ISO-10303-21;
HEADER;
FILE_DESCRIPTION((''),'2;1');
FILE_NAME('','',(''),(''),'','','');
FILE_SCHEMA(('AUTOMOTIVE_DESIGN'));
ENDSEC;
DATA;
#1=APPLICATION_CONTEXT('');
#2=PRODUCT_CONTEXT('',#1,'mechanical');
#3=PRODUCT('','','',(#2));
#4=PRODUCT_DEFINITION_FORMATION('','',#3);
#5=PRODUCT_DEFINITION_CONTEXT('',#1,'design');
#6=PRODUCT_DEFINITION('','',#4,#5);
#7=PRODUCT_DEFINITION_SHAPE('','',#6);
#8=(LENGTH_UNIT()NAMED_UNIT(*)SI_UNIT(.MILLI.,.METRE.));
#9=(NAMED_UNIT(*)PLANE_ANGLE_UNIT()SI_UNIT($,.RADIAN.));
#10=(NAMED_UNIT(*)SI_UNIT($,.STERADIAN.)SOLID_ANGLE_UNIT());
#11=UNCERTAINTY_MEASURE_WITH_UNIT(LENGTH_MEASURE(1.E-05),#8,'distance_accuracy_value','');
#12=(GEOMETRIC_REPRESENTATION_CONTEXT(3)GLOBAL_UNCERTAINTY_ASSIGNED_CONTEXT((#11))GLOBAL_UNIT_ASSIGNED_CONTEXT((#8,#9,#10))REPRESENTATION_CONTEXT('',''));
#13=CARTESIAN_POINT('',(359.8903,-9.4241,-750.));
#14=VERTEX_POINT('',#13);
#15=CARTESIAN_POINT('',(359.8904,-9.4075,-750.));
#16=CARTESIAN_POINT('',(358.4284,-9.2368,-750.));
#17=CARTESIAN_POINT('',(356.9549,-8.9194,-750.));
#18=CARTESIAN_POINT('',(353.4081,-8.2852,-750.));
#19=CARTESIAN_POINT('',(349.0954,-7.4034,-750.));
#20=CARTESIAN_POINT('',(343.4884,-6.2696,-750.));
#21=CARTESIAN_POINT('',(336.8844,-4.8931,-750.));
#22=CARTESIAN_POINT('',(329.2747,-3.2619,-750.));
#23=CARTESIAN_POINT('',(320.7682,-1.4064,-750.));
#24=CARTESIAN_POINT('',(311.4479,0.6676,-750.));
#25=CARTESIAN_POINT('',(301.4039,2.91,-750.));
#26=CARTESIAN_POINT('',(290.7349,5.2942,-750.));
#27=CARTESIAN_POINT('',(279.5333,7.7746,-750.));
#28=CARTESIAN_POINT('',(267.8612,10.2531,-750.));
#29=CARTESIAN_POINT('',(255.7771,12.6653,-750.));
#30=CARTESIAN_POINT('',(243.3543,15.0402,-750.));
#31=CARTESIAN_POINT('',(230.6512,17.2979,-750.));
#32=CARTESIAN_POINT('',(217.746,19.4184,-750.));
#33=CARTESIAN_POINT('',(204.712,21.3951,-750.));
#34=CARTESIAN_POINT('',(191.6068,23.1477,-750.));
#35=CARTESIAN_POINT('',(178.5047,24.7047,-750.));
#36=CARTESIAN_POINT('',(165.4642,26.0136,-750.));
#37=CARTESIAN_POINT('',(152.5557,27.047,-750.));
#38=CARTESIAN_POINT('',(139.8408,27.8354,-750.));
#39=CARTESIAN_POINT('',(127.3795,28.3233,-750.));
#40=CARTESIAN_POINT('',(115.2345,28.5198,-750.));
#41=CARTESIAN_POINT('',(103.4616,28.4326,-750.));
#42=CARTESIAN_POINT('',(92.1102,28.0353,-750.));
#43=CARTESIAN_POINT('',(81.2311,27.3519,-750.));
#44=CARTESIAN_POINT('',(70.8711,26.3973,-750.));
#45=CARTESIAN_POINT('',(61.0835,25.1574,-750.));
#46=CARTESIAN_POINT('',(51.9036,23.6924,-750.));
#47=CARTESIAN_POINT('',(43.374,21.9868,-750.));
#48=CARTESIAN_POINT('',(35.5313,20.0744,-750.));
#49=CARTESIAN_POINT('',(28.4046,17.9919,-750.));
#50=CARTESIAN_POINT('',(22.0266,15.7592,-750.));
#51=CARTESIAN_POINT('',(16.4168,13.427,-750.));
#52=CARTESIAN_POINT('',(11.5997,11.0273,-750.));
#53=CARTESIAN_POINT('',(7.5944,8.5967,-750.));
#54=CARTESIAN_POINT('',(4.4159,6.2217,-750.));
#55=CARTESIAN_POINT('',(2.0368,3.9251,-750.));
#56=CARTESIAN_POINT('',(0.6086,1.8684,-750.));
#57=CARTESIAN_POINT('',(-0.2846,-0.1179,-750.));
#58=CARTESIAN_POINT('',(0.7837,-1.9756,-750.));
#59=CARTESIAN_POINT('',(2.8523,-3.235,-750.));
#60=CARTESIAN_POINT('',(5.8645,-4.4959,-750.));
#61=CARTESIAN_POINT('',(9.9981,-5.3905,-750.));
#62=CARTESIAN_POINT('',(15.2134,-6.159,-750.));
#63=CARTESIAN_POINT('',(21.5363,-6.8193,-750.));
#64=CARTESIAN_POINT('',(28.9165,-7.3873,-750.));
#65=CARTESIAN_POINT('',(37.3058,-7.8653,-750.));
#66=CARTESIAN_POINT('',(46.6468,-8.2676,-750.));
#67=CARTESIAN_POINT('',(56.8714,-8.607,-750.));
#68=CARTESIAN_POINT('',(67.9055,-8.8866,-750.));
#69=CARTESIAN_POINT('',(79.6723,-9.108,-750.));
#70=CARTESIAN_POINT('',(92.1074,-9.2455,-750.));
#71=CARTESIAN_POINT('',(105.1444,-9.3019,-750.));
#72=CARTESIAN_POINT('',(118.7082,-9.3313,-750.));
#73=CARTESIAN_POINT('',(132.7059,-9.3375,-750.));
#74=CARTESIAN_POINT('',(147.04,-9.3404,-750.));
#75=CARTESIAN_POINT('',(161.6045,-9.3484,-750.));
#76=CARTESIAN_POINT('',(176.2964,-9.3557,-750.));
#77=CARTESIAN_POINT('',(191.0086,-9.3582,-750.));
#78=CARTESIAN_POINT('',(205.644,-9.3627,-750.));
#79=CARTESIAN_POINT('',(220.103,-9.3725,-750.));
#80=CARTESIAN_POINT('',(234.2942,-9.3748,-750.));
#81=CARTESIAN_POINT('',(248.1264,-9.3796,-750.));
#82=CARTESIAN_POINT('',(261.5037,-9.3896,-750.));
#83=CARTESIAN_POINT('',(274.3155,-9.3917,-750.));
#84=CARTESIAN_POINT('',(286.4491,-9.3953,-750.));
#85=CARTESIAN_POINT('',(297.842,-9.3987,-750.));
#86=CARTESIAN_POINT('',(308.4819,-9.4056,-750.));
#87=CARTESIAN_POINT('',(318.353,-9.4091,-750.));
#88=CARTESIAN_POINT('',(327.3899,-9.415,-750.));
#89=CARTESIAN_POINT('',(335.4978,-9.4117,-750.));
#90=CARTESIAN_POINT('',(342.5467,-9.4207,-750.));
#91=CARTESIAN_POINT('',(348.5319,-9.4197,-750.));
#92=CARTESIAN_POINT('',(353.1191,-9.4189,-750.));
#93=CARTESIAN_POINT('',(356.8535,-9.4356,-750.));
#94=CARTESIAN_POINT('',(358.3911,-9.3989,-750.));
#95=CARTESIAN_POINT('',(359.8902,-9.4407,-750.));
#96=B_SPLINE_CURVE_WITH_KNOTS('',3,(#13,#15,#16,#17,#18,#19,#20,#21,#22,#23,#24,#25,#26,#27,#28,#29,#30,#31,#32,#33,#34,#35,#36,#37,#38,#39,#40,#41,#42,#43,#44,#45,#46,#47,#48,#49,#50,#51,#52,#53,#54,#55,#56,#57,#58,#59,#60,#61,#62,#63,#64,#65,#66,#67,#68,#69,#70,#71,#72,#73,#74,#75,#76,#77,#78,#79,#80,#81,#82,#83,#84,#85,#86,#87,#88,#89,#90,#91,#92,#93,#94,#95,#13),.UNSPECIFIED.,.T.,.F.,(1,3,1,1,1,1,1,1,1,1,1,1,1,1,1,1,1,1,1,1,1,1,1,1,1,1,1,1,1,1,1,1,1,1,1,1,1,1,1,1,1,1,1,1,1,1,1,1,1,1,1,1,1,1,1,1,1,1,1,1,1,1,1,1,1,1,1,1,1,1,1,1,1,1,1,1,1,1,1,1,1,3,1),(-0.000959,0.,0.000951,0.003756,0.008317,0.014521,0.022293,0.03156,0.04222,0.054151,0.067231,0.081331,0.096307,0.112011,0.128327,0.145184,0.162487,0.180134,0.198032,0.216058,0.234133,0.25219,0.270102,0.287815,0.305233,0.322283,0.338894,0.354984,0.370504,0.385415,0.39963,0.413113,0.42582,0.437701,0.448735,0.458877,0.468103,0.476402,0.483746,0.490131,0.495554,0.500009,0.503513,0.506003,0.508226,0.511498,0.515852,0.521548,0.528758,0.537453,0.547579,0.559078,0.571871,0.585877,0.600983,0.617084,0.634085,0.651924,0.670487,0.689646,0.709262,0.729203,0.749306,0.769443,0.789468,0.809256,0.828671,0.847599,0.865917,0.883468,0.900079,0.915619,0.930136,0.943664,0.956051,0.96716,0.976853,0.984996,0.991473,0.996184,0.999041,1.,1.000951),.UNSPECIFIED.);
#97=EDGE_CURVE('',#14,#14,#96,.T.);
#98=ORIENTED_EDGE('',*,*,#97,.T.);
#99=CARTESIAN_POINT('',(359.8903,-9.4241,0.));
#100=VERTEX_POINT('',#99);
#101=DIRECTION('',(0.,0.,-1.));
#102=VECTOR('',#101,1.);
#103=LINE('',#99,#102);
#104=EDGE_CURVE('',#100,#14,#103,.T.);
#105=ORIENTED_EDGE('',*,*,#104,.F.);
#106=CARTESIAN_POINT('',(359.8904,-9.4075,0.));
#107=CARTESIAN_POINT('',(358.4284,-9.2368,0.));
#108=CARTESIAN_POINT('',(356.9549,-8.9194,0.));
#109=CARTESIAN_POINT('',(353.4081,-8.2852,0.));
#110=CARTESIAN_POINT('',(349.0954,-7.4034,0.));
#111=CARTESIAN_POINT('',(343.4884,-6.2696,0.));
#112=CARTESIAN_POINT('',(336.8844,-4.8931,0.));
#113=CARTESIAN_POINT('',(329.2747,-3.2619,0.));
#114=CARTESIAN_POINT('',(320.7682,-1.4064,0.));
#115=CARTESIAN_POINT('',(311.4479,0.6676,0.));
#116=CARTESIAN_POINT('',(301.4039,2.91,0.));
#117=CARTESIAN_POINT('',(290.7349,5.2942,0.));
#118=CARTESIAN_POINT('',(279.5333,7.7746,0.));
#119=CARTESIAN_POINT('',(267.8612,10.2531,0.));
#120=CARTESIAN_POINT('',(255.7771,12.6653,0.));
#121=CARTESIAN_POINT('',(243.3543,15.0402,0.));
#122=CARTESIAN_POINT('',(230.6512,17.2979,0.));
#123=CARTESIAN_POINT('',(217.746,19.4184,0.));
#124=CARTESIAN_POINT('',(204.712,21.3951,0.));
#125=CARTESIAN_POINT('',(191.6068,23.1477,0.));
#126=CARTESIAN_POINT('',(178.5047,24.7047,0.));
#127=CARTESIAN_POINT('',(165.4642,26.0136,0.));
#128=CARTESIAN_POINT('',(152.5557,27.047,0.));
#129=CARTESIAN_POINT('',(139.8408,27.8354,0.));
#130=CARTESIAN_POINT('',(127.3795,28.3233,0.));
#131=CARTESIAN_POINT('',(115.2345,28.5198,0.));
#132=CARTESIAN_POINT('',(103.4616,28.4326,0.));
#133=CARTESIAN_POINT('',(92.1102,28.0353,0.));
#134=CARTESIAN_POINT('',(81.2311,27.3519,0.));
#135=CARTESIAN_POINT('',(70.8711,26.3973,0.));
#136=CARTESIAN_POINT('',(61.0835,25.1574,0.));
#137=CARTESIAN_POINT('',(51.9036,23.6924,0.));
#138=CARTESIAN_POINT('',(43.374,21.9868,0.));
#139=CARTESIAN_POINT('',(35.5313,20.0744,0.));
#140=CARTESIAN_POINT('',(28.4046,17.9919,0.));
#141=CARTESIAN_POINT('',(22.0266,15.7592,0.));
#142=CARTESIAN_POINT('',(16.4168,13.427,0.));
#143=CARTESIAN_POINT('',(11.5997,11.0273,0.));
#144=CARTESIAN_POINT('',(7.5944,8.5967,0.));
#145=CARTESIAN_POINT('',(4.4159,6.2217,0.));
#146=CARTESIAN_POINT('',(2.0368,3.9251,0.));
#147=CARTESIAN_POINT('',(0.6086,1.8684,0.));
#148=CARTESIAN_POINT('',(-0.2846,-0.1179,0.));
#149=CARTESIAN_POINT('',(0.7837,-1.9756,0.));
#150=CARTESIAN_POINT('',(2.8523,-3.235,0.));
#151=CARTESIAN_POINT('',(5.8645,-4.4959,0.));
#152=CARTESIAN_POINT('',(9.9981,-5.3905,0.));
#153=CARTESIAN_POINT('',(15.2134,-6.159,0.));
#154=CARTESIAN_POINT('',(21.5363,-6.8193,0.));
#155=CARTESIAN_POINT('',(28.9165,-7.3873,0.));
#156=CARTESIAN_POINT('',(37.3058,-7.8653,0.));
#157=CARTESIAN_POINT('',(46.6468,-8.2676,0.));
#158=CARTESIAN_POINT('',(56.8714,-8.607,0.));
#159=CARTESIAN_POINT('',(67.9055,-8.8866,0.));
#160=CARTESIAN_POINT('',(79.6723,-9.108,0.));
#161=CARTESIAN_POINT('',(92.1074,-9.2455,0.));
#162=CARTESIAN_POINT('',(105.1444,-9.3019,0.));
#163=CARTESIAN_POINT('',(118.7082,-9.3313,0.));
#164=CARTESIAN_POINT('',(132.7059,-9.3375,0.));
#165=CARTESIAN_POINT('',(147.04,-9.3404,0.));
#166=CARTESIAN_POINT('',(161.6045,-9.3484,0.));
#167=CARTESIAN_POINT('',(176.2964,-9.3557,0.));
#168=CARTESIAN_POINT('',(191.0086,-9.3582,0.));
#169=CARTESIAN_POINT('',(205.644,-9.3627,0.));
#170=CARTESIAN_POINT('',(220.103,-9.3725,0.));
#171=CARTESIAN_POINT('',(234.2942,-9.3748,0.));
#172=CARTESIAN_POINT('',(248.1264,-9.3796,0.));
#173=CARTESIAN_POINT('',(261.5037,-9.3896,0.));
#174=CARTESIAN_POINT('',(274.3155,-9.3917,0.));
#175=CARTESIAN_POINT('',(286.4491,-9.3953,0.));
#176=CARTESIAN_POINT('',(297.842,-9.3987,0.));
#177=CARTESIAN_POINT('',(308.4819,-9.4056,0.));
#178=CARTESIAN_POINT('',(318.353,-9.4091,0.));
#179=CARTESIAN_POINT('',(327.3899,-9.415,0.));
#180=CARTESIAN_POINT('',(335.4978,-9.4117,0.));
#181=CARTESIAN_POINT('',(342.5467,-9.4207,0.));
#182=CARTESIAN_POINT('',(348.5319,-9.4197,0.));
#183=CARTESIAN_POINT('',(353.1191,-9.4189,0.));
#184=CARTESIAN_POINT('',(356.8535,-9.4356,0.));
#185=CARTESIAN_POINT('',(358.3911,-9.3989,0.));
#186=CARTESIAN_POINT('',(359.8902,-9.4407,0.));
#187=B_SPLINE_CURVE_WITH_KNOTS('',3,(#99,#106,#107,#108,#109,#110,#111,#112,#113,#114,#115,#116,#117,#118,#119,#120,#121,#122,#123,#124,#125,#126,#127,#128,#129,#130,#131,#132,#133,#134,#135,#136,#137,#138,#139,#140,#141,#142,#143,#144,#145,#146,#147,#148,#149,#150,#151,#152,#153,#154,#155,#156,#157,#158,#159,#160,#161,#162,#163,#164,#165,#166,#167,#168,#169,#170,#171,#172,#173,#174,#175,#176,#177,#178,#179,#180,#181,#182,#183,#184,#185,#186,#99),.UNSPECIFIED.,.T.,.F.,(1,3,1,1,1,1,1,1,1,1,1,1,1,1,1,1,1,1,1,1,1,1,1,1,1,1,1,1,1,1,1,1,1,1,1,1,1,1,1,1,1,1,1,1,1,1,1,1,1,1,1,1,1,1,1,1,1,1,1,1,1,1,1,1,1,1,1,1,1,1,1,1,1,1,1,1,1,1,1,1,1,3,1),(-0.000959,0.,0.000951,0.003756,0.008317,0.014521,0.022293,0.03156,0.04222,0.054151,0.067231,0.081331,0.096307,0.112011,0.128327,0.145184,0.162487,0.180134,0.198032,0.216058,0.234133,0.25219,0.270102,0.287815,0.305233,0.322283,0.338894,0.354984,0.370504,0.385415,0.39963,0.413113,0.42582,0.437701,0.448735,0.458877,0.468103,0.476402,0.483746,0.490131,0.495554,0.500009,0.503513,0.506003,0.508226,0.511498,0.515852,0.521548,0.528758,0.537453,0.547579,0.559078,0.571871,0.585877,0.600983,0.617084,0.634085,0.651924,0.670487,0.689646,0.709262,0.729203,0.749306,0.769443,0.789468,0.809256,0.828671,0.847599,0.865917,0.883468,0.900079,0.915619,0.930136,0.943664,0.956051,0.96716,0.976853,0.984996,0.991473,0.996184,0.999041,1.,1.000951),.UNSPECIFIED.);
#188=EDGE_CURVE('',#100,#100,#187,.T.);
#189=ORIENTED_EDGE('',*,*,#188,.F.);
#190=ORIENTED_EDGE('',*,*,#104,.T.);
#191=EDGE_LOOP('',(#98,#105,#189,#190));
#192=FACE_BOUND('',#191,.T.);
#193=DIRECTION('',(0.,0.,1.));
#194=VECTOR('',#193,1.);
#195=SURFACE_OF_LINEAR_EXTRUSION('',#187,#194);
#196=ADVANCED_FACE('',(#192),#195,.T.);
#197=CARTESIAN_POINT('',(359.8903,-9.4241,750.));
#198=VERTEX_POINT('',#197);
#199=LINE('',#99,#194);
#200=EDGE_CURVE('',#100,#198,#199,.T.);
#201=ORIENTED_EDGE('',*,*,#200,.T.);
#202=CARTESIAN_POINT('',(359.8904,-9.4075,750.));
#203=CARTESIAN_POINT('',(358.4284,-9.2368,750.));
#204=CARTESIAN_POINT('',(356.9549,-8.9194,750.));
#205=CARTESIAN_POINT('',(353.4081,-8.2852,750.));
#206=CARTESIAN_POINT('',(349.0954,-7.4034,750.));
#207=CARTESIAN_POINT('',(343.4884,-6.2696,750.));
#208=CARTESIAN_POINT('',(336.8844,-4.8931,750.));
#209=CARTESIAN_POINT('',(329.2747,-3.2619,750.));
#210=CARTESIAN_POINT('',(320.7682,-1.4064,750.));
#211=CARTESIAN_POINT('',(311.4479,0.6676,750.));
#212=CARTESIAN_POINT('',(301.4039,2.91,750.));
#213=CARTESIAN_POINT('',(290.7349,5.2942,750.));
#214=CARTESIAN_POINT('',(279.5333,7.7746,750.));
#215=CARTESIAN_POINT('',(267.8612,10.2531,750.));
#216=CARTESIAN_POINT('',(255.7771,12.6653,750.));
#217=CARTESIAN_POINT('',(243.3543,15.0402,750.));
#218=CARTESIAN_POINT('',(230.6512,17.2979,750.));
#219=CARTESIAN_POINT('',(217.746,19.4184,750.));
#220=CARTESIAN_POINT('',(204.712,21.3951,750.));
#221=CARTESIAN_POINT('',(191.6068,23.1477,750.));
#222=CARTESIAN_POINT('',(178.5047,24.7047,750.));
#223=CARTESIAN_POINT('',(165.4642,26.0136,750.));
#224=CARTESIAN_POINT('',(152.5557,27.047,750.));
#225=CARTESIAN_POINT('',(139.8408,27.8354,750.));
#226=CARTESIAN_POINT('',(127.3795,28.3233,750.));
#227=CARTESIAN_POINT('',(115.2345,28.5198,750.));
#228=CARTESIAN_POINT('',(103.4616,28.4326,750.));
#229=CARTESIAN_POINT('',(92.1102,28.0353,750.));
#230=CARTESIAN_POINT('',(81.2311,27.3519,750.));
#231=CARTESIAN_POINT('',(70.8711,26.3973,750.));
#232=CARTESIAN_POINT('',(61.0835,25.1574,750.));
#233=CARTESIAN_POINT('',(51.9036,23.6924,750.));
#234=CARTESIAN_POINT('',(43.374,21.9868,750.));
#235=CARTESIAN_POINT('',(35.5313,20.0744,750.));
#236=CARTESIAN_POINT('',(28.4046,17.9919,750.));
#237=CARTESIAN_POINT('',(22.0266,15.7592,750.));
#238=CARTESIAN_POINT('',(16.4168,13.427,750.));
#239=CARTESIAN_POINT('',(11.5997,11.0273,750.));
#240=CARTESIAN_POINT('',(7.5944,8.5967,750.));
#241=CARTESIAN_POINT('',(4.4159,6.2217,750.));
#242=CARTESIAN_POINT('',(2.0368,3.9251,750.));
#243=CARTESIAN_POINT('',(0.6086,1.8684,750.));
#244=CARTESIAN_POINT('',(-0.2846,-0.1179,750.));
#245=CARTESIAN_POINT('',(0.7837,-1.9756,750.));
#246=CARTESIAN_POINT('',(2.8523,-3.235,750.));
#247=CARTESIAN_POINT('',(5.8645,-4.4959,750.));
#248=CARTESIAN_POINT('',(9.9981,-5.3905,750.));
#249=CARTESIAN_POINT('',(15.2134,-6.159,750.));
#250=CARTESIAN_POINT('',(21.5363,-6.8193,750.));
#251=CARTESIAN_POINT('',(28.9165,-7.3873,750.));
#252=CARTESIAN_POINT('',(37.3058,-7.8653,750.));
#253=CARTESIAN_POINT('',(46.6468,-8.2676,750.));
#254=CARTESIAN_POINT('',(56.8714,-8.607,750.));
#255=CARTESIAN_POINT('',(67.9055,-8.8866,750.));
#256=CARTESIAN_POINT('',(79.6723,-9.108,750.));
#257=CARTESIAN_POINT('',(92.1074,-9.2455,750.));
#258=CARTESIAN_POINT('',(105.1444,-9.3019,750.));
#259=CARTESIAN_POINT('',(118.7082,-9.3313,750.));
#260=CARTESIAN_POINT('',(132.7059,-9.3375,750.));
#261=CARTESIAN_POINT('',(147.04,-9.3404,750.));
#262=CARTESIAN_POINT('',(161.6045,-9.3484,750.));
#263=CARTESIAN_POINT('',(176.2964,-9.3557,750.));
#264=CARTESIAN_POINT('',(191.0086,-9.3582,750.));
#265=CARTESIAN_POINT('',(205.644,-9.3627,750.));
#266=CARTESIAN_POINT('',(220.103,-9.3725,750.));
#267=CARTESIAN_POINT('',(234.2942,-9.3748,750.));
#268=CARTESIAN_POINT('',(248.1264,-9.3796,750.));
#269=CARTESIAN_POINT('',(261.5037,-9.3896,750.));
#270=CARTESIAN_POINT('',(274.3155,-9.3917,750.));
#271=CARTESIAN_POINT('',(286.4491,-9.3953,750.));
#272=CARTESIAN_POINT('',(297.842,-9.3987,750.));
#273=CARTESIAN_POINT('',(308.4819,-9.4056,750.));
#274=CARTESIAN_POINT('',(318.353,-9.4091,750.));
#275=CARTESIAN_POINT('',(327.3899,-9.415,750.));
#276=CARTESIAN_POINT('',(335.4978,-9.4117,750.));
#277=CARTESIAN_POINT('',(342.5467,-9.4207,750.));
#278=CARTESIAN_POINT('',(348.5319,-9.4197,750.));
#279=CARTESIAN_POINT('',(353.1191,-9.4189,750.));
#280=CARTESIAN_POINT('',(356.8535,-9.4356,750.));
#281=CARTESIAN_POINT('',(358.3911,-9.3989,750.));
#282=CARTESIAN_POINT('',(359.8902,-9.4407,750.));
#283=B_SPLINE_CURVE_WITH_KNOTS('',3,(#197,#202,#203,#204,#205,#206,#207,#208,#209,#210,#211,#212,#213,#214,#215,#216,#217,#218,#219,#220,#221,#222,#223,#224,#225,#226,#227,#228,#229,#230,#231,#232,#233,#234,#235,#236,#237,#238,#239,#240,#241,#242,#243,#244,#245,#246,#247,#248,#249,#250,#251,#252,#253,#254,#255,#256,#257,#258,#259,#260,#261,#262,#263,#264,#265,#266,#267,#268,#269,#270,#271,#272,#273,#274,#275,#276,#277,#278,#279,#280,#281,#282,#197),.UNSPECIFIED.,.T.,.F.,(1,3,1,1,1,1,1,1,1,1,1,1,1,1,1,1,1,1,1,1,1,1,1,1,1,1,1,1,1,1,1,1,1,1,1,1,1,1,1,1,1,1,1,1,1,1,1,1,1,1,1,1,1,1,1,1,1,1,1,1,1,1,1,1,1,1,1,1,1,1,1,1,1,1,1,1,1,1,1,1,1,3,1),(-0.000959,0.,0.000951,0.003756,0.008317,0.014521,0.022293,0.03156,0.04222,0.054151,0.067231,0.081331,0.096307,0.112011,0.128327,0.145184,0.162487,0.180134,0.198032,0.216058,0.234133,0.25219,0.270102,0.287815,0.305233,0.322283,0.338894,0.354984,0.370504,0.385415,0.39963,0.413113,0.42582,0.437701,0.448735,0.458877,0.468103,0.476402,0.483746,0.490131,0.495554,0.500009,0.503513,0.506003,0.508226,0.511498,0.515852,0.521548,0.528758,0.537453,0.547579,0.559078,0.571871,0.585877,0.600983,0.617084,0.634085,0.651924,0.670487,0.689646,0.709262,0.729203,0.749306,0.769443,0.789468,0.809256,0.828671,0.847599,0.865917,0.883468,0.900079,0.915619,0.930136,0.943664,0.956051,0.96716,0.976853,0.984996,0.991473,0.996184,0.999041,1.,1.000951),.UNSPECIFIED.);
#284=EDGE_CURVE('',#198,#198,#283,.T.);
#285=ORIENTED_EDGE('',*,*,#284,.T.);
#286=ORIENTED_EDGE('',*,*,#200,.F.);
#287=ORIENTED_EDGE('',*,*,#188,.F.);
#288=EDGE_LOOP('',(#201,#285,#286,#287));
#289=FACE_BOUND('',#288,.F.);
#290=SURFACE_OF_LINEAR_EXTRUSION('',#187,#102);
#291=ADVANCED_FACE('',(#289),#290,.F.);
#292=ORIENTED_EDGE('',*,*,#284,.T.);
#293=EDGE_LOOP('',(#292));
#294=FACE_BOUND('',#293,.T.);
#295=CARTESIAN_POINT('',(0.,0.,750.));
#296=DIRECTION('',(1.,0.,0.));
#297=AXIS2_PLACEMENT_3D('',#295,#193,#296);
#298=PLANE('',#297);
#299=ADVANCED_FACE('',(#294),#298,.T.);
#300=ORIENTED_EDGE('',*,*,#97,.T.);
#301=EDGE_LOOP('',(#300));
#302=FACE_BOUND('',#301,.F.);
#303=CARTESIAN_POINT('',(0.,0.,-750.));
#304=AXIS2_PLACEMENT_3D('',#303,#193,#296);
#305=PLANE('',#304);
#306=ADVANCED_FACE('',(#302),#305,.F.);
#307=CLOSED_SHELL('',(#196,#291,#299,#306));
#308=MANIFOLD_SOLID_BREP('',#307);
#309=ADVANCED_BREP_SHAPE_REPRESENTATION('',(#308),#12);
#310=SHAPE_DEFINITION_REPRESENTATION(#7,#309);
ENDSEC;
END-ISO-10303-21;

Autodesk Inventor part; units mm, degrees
ref_plane "YZ Plane" through (0, 0, 0) normal (1, 0, 0) x (0, 1, 0)
ref_plane "XZ Plane" through (0, 0, 0) normal (0, 1, 0) x (-1, 0, 0)
sketch "Airfoil" plane through (0, 0, 0) normal (0, 0, 1) x (1, 0, 0)
  spline S0 degree 3 poles (360.0001, -3.1258) (359.9999, -3.1093) (358.5352, -2.9642) (357.0563, -2.6727) (353.499, -2.1006) (349.1715, -1.2943) (343.5455, -0.2589) (336.9185, 1.0019) (329.2813, 2.4997) (320.7437, 4.2061) (311.3885, 6.1167) (301.3069, 8.1831) (290.5978, 10.3802) (279.3545, 12.6643) (267.6408, 14.9381) (255.5164, 17.1385) (243.0539, 19.2958) (230.3132, 21.3308) (217.3729, 23.2252) (204.3064, 24.9736) (191.1725, 26.4966) (178.0452, 27.8241) (164.9837, 28.9046) (152.0591, 29.712) (139.3323, 30.2778) (126.8644, 30.5476) (114.7179, 30.5317) (102.9483, 30.2384) (91.6056, 29.6426) (80.7401, 28.7689) (70.3983, 27.6332) (60.634, 26.2223) (51.4811, 24.5969) (42.9826, 22.7423) (35.1746, 20.693) (28.0854, 18.4861) (21.7475, 16.1422) (16.1794, 13.7122) (11.405, 11.2286) (7.4429, 8.7282) (4.3064, 6.298) (1.9678, 3.9602) (0.5759, 1.8788) (-0.2825, -0.1229) (0.8182, -1.9616) (2.9085, -3.1846) (5.9423, -4.3926) (10.0909, -5.2147) (15.3188, -5.8919) (21.6524, -6.4415) (29.0414, -6.8802) (37.4377, -7.2114) (46.7843, -7.4502) (57.0133, -7.6106) (68.0506, -7.6971) (79.8194, -7.7126) (92.2551, -7.6326) (105.2911, -7.4608) (118.8533, -7.2529) (132.849, -7.0142) (147.1809, -6.7663) (161.7434, -6.5195) (176.4331, -6.2697) (191.1431, -6.0148) (205.7764, -5.7632) (220.2333, -5.52) (234.4223, -5.2741) (248.2526, -5.0368) (261.628, -4.8128) (274.4379, -4.5908) (286.5696, -4.3821) (297.9608, -4.1861) (308.5993, -4.0068) (318.4689, -3.8376) (327.5045, -3.6854) (335.6112, -3.5403) (342.6591, -3.4259) (348.6433, -3.3202) (353.2298, -3.2392) (356.964, -3.1905) (358.5007, -3.1269) (360.0002, -3.1425) (360.0001, -3.1258) knots 0 0 0 0 0.000951 0.003756 0.008317 0.014521 0.022293 0.03156 0.04222 0.054151 0.067231 0.081331 0.096307 0.112011 0.128327 0.145184 0.162487 0.180134 0.198032 0.216058 0.234133 0.25219 0.270102 0.287815 0.305233 0.322283 0.338894 0.354984 0.370504 0.385415 0.39963 0.413113 0.42582 0.437701 0.448735 0.458877 0.468103 0.476402 0.483746 0.490131 0.495554 0.500009 0.503513 0.506003 0.508226 0.511498 0.515852 0.521548 0.528758 0.537453 0.547579 0.559078 0.571871 0.585877 0.600983 0.617084 0.634085 0.651924 0.670487 0.689646 0.709262 0.729203 0.749306 0.769443 0.789468 0.809256 0.828671 0.847599 0.865917 0.883468 0.900079 0.915619 0.930136 0.943664 0.956051 0.96716 0.976853 0.984996 0.991473 0.996184 0.999041 1 1 1 1
  line L0 (360.0001, -3.1258) -> (359.9999, -3.1093) construction
  line L1 (359.9999, -3.1093) -> (358.5352, -2.9642) construction
  line L2 (358.5352, -2.9642) -> (357.0563, -2.6727) construction
  line L3 (357.0563, -2.6727) -> (353.499, -2.1006) construction
  line L4 (353.499, -2.1006) -> (349.1715, -1.2943) construction
  line L5 (349.1715, -1.2943) -> (343.5455, -0.2589) construction
  line L6 (343.5455, -0.2589) -> (336.9185, 1.0019) construction
  line L7 (336.9185, 1.0019) -> (329.2813, 2.4997) construction
  line L8 (329.2813, 2.4997) -> (320.7437, 4.2061) construction
  line L9 (320.7437, 4.2061) -> (311.3885, 6.1167) construction
  line L10 (311.3885, 6.1167) -> (301.3069, 8.1831) construction
  line L11 (301.3069, 8.1831) -> (290.5978, 10.3802) construction
  line L12 (290.5978, 10.3802) -> (279.3545, 12.6643) construction
  line L13 (279.3545, 12.6643) -> (267.6408, 14.9381) construction
  line L14 (267.6408, 14.9381) -> (255.5164, 17.1385) construction
  line L15 (255.5164, 17.1385) -> (243.0539, 19.2958) construction
  line L16 (243.0539, 19.2958) -> (230.3132, 21.3308) construction
  line L17 (230.3132, 21.3308) -> (217.3729, 23.2252) construction
  line L18 (217.3729, 23.2252) -> (204.3064, 24.9736) construction
  line L19 (204.3064, 24.9736) -> (191.1725, 26.4966) construction
  line L20 (191.1725, 26.4966) -> (178.0452, 27.8241) construction
  line L21 (178.0452, 27.8241) -> (164.9837, 28.9046) construction
  line L22 (164.9837, 28.9046) -> (152.0591, 29.712) construction
  line L23 (152.0591, 29.712) -> (139.3323, 30.2778) construction
  line L24 (139.3323, 30.2778) -> (126.8644, 30.5476) construction
  line L25 (126.8644, 30.5476) -> (114.7179, 30.5317) construction
  line L26 (114.7179, 30.5317) -> (102.9483, 30.2384) construction
  line L27 (102.9483, 30.2384) -> (91.6056, 29.6426) construction
  line L28 (91.6056, 29.6426) -> (80.7401, 28.7689) construction
  line L29 (80.7401, 28.7689) -> (70.3983, 27.6332) construction
  line L30 (70.3983, 27.6332) -> (60.634, 26.2223) construction
  line L31 (60.634, 26.2223) -> (51.4811, 24.5969) construction
  line L32 (51.4811, 24.5969) -> (42.9826, 22.7423) construction
  line L33 (42.9826, 22.7423) -> (35.1746, 20.693) construction
  line L34 (35.1746, 20.693) -> (28.0854, 18.4861) construction
  line L35 (28.0854, 18.4861) -> (21.7475, 16.1422) construction
  line L36 (21.7475, 16.1422) -> (16.1794, 13.7122) construction
  line L37 (16.1794, 13.7122) -> (11.405, 11.2286) construction
  line L38 (11.405, 11.2286) -> (7.4429, 8.7282) construction
  line L39 (7.4429, 8.7282) -> (4.3064, 6.298) construction
  line L40 (4.3064, 6.298) -> (1.9678, 3.9602) construction
  line L41 (1.9678, 3.9602) -> (0.5759, 1.8788) construction
  line L42 (0.5759, 1.8788) -> (-0.2825, -0.1229) construction
  line L43 (-0.2825, -0.1229) -> (0.8182, -1.9616) construction
  line L44 (0.8182, -1.9616) -> (2.9085, -3.1846) construction
  line L45 (2.9085, -3.1846) -> (5.9423, -4.3926) construction
  line L46 (5.9423, -4.3926) -> (10.0909, -5.2147) construction
  line L47 (10.0909, -5.2147) -> (15.3188, -5.8919) construction
  line L48 (15.3188, -5.8919) -> (21.6524, -6.4415) construction
  line L49 (21.6524, -6.4415) -> (29.0414, -6.8802) construction
  line L50 (29.0414, -6.8802) -> (37.4377, -7.2114) construction
  line L51 (37.4377, -7.2114) -> (46.7843, -7.4502) construction
  line L52 (46.7843, -7.4502) -> (57.0133, -7.6106) construction
  line L53 (57.0133, -7.6106) -> (68.0506, -7.6971) construction
  line L54 (68.0506, -7.6971) -> (79.8194, -7.7126) construction
  line L55 (79.8194, -7.7126) -> (92.2551, -7.6326) construction
  line L56 (92.2551, -7.6326) -> (105.2911, -7.4608) construction
  line L57 (105.2911, -7.4608) -> (118.8533, -7.2529) construction
  line L58 (118.8533, -7.2529) -> (132.849, -7.0142) construction
  line L59 (132.849, -7.0142) -> (147.1809, -6.7663) construction
  line L60 (147.1809, -6.7663) -> (161.7434, -6.5195) construction
  line L61 (161.7434, -6.5195) -> (176.4331, -6.2697) construction
  line L62 (176.4331, -6.2697) -> (191.1431, -6.0148) construction
  line L63 (191.1431, -6.0148) -> (205.7764, -5.7632) construction
  line L64 (205.7764, -5.7632) -> (220.2333, -5.52) construction
  line L65 (220.2333, -5.52) -> (234.4223, -5.2741) construction
  line L66 (234.4223, -5.2741) -> (248.2526, -5.0368) construction
  line L67 (248.2526, -5.0368) -> (261.628, -4.8128) construction
  line L68 (261.628, -4.8128) -> (274.4379, -4.5908) construction
  line L69 (274.4379, -4.5908) -> (286.5696, -4.3821) construction
  line L70 (286.5696, -4.3821) -> (297.9608, -4.1861) construction
  line L71 (297.9608, -4.1861) -> (308.5993, -4.0068) construction
  line L72 (308.5993, -4.0068) -> (318.4689, -3.8376) construction
  line L73 (318.4689, -3.8376) -> (327.5045, -3.6854) construction
  line L74 (327.5045, -3.6854) -> (335.6112, -3.5403) construction
  line L75 (335.6112, -3.5403) -> (342.6591, -3.4259) construction
  line L76 (342.6591, -3.4259) -> (348.6433, -3.3202) construction
  line L77 (348.6433, -3.3202) -> (353.2298, -3.2392) construction
  line L78 (353.2298, -3.2392) -> (356.964, -3.1905) construction
  line L79 (356.964, -3.1905) -> (358.5007, -3.1269) construction
  line L80 (358.5007, -3.1269) -> (360.0002, -3.1425) construction
  line L81 (360.0002, -3.1425) -> (360.0001, -3.1258) construction
  line L82 (0, 0) -> (360.0001, -3.1258) construction
  point P0 (179.3364, 5.2593)
sketch "Sketch1" plane through (0, 0, 0) normal (0, 0, 1) x (1, 0, 0)
  line L0 (0, 0) -> (0, -30) construction
  line L1 (0, -30) -> (300, -30) construction
  spline S0 degree 3 poles (359.8903, -9.4241) (359.8904, -9.4075) (358.4284, -9.2368) (356.9549, -8.9194) (353.4081, -8.2852) (349.0954, -7.4034) (343.4884, -6.2696) (336.8844, -4.8931) (329.2747, -3.2619) (320.7682, -1.4064) (311.4479, 0.6676) (301.4039, 2.91) (290.7349, 5.2942) (279.5333, 7.7746) (267.8612, 10.2531) (255.7771, 12.6653) (243.3543, 15.0402) (230.6512, 17.2979) (217.746, 19.4184) (204.712, 21.3951) (191.6068, 23.1477) (178.5047, 24.7047) (165.4642, 26.0136) (152.5557, 27.047) (139.8408, 27.8354) (127.3795, 28.3233) (115.2345, 28.5198) (103.4616, 28.4326) (92.1102, 28.0353) (81.2311, 27.3519) (70.8711, 26.3973) (61.0835, 25.1574) (51.9036, 23.6924) (43.374, 21.9868) (35.5313, 20.0744) (28.4046, 17.9919) (22.0266, 15.7592) (16.4168, 13.427) (11.5997, 11.0273) (7.5944, 8.5967) (4.4159, 6.2217) (2.0368, 3.9251) (0.6086, 1.8684) (-0.2846, -0.1179) (0.7837, -1.9756) (2.8523, -3.235) (5.8645, -4.4959) (9.9981, -5.3905) (15.2134, -6.159) (21.5363, -6.8193) (28.9165, -7.3873) (37.3058, -7.8653) (46.6468, -8.2676) (56.8714, -8.607) (67.9055, -8.8866) (79.6723, -9.108) (92.1074, -9.2455) (105.1444, -9.3019) (118.7082, -9.3313) (132.7059, -9.3375) (147.04, -9.3404) (161.6045, -9.3484) (176.2964, -9.3557) (191.0086, -9.3582) (205.644, -9.3627) (220.103, -9.3725) (234.2942, -9.3748) (248.1264, -9.3796) (261.5037, -9.3896) (274.3155, -9.3917) (286.4491, -9.3953) (297.842, -9.3987) (308.4819, -9.4056) (318.353, -9.4091) (327.3899, -9.415) (335.4978, -9.4117) (342.5467, -9.4207) (348.5319, -9.4197) (353.1191, -9.4189) (356.8535, -9.4356) (358.3911, -9.3989) (359.8902, -9.4407) (359.8903, -9.4241) knots 0 0 0 0 0.000951 0.003756 0.008317 0.014521 0.022293 0.03156 0.04222 0.054151 0.067231 0.081331 0.096307 0.112011 0.128327 0.145184 0.162487 0.180134 0.198032 0.216058 0.234133 0.25219 0.270102 0.287815 0.305233 0.322283 0.338894 0.354984 0.370504 0.385415 0.39963 0.413113 0.42582 0.437701 0.448735 0.458877 0.468103 0.476402 0.483746 0.490131 0.495554 0.500009 0.503513 0.506003 0.508226 0.511498 0.515852 0.521548 0.528758 0.537453 0.547579 0.559078 0.571871 0.585877 0.600983 0.617084 0.634085 0.651924 0.670487 0.689646 0.709262 0.729203 0.749306 0.769443 0.789468 0.809256 0.828671 0.847599 0.865917 0.883468 0.900079 0.915619 0.930136 0.943664 0.956051 0.96716 0.976853 0.984996 0.991473 0.996184 0.999041 1 1 1 1
  line L2 (359.8903, -9.4241) -> (359.8904, -9.4075) construction
  line L3 (359.8904, -9.4075) -> (358.4284, -9.2368) construction
  line L4 (358.4284, -9.2368) -> (356.9549, -8.9194) construction
  line L5 (356.9549, -8.9194) -> (353.4081, -8.2852) construction
  line L6 (353.4081, -8.2852) -> (349.0954, -7.4034) construction
  line L7 (349.0954, -7.4034) -> (343.4884, -6.2696) construction
  line L8 (343.4884, -6.2696) -> (336.8844, -4.8931) construction
  line L9 (336.8844, -4.8931) -> (329.2747, -3.2619) construction
  line L10 (329.2747, -3.2619) -> (320.7682, -1.4064) construction
  line L11 (320.7682, -1.4064) -> (311.4479, 0.6676) construction
  line L12 (311.4479, 0.6676) -> (301.4039, 2.91) construction
  line L13 (301.4039, 2.91) -> (290.7349, 5.2942) construction
  line L14 (290.7349, 5.2942) -> (279.5333, 7.7746) construction
  line L15 (279.5333, 7.7746) -> (267.8612, 10.2531) construction
  line L16 (267.8612, 10.2531) -> (255.7771, 12.6653) construction
  line L17 (255.7771, 12.6653) -> (243.3543, 15.0402) construction
  line L18 (243.3543, 15.0402) -> (230.6512, 17.2979) construction
  line L19 (230.6512, 17.2979) -> (217.746, 19.4184) construction
  line L20 (217.746, 19.4184) -> (204.712, 21.3951) construction
  line L21 (204.712, 21.3951) -> (191.6068, 23.1477) construction
  line L22 (191.6068, 23.1477) -> (178.5047, 24.7047) construction
  line L23 (178.5047, 24.7047) -> (165.4642, 26.0136) construction
  line L24 (165.4642, 26.0136) -> (152.5557, 27.047) construction
  line L25 (152.5557, 27.047) -> (139.8408, 27.8354) construction
  line L26 (139.8408, 27.8354) -> (127.3795, 28.3233) construction
  line L27 (127.3795, 28.3233) -> (115.2345, 28.5198) construction
  line L28 (115.2345, 28.5198) -> (103.4616, 28.4326) construction
  line L29 (103.4616, 28.4326) -> (92.1102, 28.0353) construction
  line L30 (92.1102, 28.0353) -> (81.2311, 27.3519) construction
  line L31 (81.2311, 27.3519) -> (70.8711, 26.3973) construction
  line L32 (70.8711, 26.3973) -> (61.0835, 25.1574) construction
  line L33 (61.0835, 25.1574) -> (51.9036, 23.6924) construction
  line L34 (51.9036, 23.6924) -> (43.374, 21.9868) construction
  line L35 (43.374, 21.9868) -> (35.5313, 20.0744) construction
  line L36 (35.5313, 20.0744) -> (28.4046, 17.9919) construction
  line L37 (28.4046, 17.9919) -> (22.0266, 15.7592) construction
  line L38 (22.0266, 15.7592) -> (16.4168, 13.427) construction
  line L39 (16.4168, 13.427) -> (11.5997, 11.0273) construction
  line L40 (11.5997, 11.0273) -> (7.5944, 8.5967) construction
  line L41 (7.5944, 8.5967) -> (4.4159, 6.2217) construction
  line L42 (4.4159, 6.2217) -> (2.0368, 3.9251) construction
  line L43 (2.0368, 3.9251) -> (0.6086, 1.8684) construction
  line L44 (0.6086, 1.8684) -> (-0.2846, -0.1179) construction
  line L45 (-0.2846, -0.1179) -> (0.7837, -1.9756) construction
  line L46 (0.7837, -1.9756) -> (2.8523, -3.235) construction
  line L47 (2.8523, -3.235) -> (5.8645, -4.4959) construction
  line L48 (5.8645, -4.4959) -> (9.9981, -5.3905) construction
  line L49 (9.9981, -5.3905) -> (15.2134, -6.159) construction
  line L50 (15.2134, -6.159) -> (21.5363, -6.8193) construction
  line L51 (21.5363, -6.8193) -> (28.9165, -7.3873) construction
  line L52 (28.9165, -7.3873) -> (37.3058, -7.8653) construction
  line L53 (37.3058, -7.8653) -> (46.6468, -8.2676) construction
  line L54 (46.6468, -8.2676) -> (56.8714, -8.607) construction
  line L55 (56.8714, -8.607) -> (67.9055, -8.8866) construction
  line L56 (67.9055, -8.8866) -> (79.6723, -9.108) construction
  line L57 (79.6723, -9.108) -> (92.1074, -9.2455) construction
  line L58 (92.1074, -9.2455) -> (105.1444, -9.3019) construction
  line L59 (105.1444, -9.3019) -> (118.7082, -9.3313) construction
  line L60 (118.7082, -9.3313) -> (132.7059, -9.3375) construction
  line L61 (132.7059, -9.3375) -> (147.04, -9.3404) construction
  line L62 (147.04, -9.3404) -> (161.6045, -9.3484) construction
  line L63 (161.6045, -9.3484) -> (176.2964, -9.3557) construction
  line L64 (176.2964, -9.3557) -> (191.0086, -9.3582) construction
  line L65 (191.0086, -9.3582) -> (205.644, -9.3627) construction
  line L66 (205.644, -9.3627) -> (220.103, -9.3725) construction
  line L67 (220.103, -9.3725) -> (234.2942, -9.3748) construction
  line L68 (234.2942, -9.3748) -> (248.1264, -9.3796) construction
  line L69 (248.1264, -9.3796) -> (261.5037, -9.3896) construction
  line L70 (261.5037, -9.3896) -> (274.3155, -9.3917) construction
  line L71 (274.3155, -9.3917) -> (286.4491, -9.3953) construction
  line L72 (286.4491, -9.3953) -> (297.842, -9.3987) construction
  line L73 (297.842, -9.3987) -> (308.4819, -9.4056) construction
  line L74 (308.4819, -9.4056) -> (318.353, -9.4091) construction
  line L75 (318.353, -9.4091) -> (327.3899, -9.415) construction
  line L76 (327.3899, -9.415) -> (335.4978, -9.4117) construction
  line L77 (335.4978, -9.4117) -> (342.5467, -9.4207) construction
  line L78 (342.5467, -9.4207) -> (348.5319, -9.4197) construction
  line L79 (348.5319, -9.4197) -> (353.1191, -9.4189) construction
  line L80 (353.1191, -9.4189) -> (356.8535, -9.4356) construction
  line L81 (356.8535, -9.4356) -> (358.3911, -9.3989) construction
  line L82 (358.3911, -9.3989) -> (359.8902, -9.4407) construction
  line L83 (359.8902, -9.4407) -> (359.8903, -9.4241) construction
  line L84 (0, 0) -> (359.8903, -9.4241) construction
  point P0 (0, 0)
  dimension "d4" = 30
  dimension "d5" = 300
  dimension "d6" = -1.5
extrude "Extrusion1" add sketch "Sketch1" along normal mid plane 1500
ref_plane "Work Plane1" through (0, 0, 0) normal (0.0261769, 0.9996573, 0) x (0.4325961, -0.0113279, 0.9015167)
properties part number "Airfoil"
